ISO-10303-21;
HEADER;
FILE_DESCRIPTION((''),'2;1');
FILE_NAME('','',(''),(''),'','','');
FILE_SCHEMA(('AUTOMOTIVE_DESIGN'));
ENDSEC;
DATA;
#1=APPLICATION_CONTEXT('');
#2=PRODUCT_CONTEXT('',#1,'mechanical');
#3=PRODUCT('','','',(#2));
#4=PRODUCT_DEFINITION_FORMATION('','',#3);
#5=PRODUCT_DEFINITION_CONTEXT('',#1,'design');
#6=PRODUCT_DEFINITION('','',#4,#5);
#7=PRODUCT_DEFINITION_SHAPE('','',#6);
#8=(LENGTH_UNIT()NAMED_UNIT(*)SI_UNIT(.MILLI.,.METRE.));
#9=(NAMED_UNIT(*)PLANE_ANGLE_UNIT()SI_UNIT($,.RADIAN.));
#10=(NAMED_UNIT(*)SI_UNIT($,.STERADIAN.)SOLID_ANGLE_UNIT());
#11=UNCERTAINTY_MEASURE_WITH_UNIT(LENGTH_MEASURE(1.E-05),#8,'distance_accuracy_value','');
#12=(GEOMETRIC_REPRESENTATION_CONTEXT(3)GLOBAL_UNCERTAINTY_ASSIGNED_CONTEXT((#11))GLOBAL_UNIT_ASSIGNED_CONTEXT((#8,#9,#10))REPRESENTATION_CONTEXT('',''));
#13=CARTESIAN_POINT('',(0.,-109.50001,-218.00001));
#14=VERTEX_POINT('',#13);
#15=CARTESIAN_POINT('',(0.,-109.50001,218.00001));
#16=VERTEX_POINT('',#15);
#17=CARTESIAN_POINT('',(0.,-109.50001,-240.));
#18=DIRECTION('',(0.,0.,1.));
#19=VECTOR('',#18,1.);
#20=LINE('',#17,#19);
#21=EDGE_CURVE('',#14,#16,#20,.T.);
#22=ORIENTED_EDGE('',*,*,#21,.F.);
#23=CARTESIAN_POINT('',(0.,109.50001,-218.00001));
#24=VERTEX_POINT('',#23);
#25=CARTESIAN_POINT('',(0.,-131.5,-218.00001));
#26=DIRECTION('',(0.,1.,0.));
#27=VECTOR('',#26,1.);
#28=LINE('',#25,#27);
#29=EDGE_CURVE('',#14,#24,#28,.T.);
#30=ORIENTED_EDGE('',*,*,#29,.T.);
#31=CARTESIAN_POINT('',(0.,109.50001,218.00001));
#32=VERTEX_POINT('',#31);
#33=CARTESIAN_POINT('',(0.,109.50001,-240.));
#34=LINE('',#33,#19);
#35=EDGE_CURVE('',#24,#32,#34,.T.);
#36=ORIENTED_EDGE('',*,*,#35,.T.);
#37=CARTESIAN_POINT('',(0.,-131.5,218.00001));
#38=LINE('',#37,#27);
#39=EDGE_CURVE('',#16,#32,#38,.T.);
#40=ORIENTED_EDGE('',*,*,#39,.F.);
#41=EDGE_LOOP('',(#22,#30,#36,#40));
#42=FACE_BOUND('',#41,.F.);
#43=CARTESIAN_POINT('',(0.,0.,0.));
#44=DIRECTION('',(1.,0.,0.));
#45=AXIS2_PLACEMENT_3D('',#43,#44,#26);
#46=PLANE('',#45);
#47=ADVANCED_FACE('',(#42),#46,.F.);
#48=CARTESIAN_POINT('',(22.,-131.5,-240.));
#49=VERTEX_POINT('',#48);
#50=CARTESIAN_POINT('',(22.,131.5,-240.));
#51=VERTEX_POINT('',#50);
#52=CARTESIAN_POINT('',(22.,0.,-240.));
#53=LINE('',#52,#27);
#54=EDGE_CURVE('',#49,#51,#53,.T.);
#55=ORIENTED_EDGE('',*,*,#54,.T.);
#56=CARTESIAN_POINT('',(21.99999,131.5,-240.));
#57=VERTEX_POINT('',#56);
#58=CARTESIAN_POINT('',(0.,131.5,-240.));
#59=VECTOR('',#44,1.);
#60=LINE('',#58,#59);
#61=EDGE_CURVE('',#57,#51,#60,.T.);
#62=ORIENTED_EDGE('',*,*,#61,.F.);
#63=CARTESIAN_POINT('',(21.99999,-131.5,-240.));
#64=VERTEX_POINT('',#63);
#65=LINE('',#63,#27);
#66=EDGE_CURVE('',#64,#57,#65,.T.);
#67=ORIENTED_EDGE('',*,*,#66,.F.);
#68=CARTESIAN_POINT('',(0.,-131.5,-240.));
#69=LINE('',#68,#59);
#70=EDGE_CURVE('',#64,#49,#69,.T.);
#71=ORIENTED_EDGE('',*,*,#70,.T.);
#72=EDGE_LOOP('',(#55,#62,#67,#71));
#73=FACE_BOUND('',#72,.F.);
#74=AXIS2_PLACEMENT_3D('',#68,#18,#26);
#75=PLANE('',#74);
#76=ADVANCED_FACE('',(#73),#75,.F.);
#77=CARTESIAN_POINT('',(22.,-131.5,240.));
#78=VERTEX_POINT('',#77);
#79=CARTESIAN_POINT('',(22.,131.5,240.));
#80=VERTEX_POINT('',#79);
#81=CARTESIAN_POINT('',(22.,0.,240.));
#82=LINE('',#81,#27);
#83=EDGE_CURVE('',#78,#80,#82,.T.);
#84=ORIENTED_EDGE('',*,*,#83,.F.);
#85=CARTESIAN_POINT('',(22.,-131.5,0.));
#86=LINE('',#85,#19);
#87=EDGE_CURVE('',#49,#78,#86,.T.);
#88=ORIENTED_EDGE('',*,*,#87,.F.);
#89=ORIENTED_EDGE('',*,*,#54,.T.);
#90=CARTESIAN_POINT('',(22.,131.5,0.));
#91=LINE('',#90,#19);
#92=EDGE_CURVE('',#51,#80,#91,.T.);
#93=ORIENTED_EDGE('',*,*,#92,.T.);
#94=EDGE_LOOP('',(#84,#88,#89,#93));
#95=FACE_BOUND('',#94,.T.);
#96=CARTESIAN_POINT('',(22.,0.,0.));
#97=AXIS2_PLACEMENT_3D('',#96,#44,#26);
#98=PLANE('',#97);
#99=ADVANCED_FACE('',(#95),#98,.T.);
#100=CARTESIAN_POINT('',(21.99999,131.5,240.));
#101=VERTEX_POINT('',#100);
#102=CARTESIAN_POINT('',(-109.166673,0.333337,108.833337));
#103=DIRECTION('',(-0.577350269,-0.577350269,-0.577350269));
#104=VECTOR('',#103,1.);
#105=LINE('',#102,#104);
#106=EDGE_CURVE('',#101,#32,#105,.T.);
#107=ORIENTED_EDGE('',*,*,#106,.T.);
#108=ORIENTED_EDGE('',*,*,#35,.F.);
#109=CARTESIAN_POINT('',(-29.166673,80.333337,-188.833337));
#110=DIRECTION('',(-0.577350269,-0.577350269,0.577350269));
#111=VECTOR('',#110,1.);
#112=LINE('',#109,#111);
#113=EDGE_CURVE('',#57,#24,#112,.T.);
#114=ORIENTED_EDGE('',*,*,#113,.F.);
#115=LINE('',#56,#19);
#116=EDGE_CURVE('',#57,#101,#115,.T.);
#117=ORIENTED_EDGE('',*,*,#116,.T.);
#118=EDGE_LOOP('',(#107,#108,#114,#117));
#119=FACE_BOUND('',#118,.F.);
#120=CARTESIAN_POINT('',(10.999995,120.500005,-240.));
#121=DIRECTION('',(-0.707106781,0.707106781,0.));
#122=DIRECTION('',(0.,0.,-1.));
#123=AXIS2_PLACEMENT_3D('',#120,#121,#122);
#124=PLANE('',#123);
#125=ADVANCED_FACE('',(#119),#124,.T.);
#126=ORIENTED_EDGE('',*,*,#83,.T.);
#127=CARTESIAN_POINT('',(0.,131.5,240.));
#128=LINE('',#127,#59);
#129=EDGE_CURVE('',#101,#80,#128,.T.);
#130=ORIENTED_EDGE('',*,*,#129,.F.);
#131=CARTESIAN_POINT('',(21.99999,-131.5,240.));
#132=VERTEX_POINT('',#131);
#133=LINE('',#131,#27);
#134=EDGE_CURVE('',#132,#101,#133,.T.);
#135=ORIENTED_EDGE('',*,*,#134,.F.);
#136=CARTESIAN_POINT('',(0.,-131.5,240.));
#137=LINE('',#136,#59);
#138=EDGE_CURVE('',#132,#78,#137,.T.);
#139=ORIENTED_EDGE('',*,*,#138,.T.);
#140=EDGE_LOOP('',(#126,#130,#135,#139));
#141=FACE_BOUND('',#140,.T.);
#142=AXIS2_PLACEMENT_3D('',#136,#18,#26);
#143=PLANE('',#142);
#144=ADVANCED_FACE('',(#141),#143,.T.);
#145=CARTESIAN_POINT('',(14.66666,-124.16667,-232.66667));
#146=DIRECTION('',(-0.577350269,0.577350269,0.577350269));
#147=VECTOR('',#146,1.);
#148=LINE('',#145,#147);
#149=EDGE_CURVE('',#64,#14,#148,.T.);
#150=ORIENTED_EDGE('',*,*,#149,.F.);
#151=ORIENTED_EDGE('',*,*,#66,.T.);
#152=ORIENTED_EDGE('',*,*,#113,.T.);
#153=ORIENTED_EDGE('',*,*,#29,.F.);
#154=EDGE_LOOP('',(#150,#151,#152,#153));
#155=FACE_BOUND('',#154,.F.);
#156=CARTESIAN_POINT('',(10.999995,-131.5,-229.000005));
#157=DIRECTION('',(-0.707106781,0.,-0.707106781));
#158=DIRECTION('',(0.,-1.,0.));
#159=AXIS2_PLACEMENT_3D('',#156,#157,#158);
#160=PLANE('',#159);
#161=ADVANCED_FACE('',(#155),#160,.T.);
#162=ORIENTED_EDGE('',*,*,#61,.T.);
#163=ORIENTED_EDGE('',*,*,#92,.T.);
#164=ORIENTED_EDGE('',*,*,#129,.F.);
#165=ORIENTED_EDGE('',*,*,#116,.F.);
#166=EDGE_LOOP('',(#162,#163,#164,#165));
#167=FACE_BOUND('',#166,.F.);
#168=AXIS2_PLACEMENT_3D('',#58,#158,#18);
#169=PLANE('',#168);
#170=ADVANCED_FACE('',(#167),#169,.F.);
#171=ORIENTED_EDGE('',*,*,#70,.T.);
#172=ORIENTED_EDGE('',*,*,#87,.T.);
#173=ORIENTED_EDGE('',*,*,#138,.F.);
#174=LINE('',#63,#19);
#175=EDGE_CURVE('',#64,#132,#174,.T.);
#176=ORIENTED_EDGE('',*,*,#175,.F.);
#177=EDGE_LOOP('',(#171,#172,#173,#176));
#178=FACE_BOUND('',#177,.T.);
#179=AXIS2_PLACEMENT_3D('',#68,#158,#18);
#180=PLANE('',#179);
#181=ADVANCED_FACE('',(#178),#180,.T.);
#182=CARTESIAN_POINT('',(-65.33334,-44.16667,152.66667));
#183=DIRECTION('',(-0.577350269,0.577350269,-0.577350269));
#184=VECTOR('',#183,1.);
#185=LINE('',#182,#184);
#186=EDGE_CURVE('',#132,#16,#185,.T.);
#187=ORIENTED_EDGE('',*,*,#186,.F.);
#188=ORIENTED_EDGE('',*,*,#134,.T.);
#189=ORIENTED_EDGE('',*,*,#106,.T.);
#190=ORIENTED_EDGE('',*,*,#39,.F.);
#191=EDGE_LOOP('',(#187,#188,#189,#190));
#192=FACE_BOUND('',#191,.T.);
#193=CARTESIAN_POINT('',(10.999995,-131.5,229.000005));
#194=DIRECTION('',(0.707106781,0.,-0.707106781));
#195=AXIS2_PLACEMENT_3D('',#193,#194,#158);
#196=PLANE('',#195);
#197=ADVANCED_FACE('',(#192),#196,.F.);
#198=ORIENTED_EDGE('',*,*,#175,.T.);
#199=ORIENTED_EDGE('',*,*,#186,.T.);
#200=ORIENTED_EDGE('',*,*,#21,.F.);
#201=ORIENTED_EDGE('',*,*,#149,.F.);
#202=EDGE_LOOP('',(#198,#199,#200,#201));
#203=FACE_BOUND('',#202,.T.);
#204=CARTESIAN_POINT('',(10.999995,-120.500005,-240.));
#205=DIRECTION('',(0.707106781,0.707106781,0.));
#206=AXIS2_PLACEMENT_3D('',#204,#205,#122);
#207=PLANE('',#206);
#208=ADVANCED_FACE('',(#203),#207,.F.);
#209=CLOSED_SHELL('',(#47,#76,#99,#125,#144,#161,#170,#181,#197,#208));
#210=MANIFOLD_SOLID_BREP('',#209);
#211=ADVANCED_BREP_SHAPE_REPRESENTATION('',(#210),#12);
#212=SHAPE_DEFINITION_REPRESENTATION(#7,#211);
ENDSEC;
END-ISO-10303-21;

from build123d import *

# Parameters (mm, degrees)
F0_W     = 263
F0_H     = 480
F1_DEPTH = 22
F2_SIZE  = 21.99999


# Not quite as in the source:
# - a fillet or chamfer is up to 0.001 mm smaller than in the source, because OpenCascade refuses the exact size


with BuildPart() as f1:
    # F0 (on Right) → F1 (new body)
    with BuildSketch(Plane.YZ):
        Rectangle(F0_W, F0_H)
    extrude(amount=F1_DEPTH)

    # F2 (size 22 in the source; OpenCascade refuses exactly that, so slightly less here)
    f2_edges = [f1.edges().sort_by_distance(p)[0] for p in [
        (0, 131.5, 0),
        (0, 0, 240),
        (0, -131.5, 0),
        (0, 0, -240),
    ]]
    chamfer(f2_edges, length=F2_SIZE)


solid = f1.part
